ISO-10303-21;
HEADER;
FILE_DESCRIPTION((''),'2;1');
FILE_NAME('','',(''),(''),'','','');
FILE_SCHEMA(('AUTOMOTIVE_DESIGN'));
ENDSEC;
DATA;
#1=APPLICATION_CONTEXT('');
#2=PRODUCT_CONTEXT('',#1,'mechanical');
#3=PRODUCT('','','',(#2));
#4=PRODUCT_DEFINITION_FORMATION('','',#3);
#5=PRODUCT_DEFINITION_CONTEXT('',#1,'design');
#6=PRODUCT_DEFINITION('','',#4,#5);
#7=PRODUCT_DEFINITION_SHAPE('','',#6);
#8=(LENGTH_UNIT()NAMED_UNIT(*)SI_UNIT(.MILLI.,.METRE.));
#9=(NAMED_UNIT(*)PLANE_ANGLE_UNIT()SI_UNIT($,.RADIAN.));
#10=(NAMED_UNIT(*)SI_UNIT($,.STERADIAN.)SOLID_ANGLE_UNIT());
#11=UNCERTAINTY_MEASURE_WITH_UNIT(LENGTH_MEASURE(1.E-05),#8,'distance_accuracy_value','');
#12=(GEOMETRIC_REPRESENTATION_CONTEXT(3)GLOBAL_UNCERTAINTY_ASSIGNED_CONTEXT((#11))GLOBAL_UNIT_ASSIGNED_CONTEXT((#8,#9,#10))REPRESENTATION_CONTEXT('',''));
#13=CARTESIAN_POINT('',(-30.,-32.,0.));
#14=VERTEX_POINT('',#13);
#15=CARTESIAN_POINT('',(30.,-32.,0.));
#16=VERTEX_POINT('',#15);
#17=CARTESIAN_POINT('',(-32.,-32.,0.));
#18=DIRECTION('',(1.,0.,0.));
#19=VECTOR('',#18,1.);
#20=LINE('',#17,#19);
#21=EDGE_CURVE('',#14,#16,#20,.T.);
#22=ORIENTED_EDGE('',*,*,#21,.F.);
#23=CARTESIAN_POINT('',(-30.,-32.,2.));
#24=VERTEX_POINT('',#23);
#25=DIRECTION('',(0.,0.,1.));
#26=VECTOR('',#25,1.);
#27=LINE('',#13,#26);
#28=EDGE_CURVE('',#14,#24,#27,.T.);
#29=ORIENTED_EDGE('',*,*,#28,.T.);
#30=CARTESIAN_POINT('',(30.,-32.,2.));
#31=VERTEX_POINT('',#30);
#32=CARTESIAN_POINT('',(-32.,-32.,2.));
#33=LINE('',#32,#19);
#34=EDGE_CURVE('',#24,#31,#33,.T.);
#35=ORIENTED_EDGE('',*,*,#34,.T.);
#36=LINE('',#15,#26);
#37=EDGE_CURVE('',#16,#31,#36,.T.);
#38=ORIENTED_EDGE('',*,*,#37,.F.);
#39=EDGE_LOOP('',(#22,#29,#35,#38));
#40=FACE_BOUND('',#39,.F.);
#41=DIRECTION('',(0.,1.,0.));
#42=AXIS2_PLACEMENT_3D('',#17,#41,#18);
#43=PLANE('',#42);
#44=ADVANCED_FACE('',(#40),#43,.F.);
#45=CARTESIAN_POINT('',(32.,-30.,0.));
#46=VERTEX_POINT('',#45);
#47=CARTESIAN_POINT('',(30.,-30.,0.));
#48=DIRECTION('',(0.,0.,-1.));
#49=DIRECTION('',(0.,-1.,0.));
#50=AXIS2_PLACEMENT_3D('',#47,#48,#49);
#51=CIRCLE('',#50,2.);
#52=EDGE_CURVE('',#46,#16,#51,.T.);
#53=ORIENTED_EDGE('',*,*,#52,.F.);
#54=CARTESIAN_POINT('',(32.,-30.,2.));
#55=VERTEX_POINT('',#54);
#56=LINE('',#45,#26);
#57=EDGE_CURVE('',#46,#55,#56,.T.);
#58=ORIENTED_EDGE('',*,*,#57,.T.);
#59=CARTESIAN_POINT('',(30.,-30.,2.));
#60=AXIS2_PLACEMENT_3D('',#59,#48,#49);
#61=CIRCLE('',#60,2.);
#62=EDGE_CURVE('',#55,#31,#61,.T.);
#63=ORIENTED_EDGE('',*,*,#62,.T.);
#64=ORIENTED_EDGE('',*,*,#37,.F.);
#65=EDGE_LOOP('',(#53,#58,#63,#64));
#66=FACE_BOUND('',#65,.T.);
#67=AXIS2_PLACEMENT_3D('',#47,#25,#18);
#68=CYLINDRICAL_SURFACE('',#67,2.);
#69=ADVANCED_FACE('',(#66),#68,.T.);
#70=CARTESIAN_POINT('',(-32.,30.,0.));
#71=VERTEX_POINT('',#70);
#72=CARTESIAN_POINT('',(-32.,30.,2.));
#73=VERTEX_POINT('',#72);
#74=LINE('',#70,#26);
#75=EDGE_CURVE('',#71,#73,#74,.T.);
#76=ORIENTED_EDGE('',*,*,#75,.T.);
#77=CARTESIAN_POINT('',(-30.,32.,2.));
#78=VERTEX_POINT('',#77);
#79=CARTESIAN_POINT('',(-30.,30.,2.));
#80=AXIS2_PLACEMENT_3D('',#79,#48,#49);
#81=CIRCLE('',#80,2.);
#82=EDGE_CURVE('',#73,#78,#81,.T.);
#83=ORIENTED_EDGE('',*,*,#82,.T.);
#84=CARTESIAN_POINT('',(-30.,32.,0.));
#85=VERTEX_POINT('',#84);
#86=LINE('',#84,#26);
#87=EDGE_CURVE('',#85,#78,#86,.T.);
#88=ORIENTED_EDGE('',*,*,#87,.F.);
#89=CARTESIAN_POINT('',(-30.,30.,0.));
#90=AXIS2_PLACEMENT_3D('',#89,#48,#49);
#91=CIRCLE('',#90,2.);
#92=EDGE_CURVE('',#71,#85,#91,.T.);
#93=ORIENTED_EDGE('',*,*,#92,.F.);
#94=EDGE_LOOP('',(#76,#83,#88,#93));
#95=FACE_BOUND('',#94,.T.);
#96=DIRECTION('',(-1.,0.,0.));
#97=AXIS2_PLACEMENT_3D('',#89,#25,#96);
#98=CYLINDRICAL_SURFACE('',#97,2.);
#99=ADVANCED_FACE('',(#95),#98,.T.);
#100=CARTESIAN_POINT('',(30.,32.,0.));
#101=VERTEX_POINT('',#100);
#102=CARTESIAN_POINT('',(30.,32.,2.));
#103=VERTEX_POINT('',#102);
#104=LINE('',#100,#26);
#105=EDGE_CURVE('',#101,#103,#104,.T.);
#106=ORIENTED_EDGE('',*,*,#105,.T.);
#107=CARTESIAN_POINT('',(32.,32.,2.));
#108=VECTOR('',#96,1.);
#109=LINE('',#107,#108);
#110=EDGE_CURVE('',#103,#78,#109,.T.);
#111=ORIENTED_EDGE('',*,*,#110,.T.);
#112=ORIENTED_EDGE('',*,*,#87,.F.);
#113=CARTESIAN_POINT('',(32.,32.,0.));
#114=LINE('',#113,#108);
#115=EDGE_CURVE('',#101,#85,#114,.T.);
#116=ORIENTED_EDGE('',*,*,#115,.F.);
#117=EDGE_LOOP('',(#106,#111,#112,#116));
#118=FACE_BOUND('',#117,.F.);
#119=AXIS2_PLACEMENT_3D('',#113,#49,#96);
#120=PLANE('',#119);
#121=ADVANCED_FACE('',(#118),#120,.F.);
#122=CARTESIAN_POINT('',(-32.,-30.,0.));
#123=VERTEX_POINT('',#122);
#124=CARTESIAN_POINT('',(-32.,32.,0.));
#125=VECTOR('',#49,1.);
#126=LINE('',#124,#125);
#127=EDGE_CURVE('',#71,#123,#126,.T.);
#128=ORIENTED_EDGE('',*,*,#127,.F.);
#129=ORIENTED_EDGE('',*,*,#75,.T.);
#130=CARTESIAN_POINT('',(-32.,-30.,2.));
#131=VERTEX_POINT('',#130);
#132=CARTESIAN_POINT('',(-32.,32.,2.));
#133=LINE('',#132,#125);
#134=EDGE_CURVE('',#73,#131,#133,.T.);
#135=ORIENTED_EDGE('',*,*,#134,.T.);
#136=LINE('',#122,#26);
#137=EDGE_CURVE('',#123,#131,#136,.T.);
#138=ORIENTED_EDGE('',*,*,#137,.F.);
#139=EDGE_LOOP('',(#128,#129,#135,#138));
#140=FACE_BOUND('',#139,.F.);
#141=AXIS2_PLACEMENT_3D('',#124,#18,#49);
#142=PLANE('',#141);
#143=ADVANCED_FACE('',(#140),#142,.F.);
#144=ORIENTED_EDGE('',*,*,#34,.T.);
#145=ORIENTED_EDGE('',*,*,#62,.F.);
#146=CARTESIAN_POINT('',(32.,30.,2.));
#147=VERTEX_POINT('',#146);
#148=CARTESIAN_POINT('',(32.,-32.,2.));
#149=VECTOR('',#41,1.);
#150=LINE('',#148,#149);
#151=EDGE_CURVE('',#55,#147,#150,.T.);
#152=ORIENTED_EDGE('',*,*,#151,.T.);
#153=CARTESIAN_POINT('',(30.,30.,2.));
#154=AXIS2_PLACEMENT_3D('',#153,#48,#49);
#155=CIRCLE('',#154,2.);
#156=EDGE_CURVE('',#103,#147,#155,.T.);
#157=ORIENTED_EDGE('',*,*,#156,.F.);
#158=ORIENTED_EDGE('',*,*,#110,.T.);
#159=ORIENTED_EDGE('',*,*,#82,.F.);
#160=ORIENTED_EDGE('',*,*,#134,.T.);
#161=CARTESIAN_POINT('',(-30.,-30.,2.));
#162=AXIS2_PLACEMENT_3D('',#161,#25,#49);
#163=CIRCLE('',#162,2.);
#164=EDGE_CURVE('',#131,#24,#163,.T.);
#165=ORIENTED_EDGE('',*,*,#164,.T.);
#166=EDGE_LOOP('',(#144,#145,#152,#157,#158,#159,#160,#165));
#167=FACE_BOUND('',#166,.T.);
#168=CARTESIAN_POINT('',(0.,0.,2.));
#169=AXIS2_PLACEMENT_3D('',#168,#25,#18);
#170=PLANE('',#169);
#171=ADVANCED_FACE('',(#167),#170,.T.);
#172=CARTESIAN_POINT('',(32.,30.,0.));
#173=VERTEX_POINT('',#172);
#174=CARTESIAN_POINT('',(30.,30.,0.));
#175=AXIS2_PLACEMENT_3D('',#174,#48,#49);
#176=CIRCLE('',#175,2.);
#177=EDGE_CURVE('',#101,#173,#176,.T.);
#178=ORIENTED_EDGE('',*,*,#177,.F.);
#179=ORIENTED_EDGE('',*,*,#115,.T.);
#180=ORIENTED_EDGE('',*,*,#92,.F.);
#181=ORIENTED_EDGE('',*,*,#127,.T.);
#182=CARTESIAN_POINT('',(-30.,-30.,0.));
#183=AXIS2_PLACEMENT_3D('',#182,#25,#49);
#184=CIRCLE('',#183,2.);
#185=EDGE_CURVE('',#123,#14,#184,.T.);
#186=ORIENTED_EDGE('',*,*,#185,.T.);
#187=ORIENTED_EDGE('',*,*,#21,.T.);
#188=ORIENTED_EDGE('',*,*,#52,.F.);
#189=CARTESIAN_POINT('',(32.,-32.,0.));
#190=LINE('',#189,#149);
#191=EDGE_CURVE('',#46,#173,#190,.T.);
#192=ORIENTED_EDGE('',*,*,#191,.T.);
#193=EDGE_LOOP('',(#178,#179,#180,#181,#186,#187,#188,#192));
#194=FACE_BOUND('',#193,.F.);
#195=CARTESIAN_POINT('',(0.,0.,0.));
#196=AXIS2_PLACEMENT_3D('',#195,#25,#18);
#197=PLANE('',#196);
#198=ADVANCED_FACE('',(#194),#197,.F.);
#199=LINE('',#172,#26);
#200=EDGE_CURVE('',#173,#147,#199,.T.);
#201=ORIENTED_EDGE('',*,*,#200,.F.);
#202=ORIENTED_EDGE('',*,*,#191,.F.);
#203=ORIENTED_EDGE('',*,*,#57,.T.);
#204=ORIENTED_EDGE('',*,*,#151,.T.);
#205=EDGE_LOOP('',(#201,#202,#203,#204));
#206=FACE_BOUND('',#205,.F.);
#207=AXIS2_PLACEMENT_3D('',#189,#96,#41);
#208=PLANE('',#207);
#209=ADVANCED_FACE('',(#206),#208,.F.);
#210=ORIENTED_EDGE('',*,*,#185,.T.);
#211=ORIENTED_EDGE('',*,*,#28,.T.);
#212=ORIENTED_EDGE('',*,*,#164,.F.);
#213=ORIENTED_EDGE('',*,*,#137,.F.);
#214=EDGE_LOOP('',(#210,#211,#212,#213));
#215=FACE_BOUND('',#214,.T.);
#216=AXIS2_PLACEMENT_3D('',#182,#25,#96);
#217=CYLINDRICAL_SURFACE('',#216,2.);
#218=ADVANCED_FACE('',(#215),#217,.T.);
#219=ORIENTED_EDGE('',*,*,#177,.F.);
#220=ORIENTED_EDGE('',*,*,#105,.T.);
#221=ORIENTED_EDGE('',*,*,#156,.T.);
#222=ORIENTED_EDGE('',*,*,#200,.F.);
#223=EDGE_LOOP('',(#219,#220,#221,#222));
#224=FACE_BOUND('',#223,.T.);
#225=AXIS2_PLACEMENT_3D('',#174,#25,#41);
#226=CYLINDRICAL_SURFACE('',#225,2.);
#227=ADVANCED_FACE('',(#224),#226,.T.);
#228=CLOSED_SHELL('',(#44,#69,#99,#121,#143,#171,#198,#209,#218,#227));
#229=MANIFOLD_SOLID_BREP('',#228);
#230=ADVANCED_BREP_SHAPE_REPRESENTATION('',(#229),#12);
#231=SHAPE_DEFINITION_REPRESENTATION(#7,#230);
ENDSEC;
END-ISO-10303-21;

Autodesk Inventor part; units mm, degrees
ref_plane "YZ Plane" through (0, 0, 0) normal (1, 0, 0) x (0, 1, 0)
ref_plane "XZ Plane" through (0, 0, 0) normal (0, 1, 0) x (-1, 0, 0)
ref_plane "XY Plane" through (0, 0, 0) normal (0, 0, 1) x (1, 0, 0)
sketch "Sketch1" plane through (0, 0, 0) normal (0, 0, 1) x (1, 0, 0)
  line L0 (-32, -32) -> (32, -32)
  line L1 (32, -32) -> (32, 32)
  line L2 (32, 32) -> (-32, 32)
  line L3 (-32, 32) -> (-32, -32)
  line L4 (-32, -32) -> (32, 32) construction
  line L5 (32, -32) -> (-32, 32) construction
  point P0 (0, 0)
  dimension "d154" = 64
  dimension "d155" = 64
extrude "Plate5" add sketch "Sketch1" along normal blind 2
fillet "Corner Round1" radius 2 4 edges at (32, 32, 1) (-32, -32, 1) (-32, 32, 1) (32, -32, 1)
sketch "Sketch11" plane through (-50.5, -22, -28) normal (1, 0, 0) x (0, 0, -1)
  line L0 (-25.25, 44) -> (-25.25, 0) construction
  line L1 (0, 0) -> (-25.25, 0) construction
  line L2 (0, 0) -> (0, 44) construction
  line L3 (0, 44) -> (-25.25, 44) construction
  circle A0 centre (-10, 22) radius 5.5
  point P0 (-28, 22)
  point P1 (0, 22)
  dimension "d192" = 11
  dimension "d193" = 10
cut "Cut3" [suppressed]
feature "Corner Round3" [suppressed]
sketch "Sketch10" plane through (-34, 30, 2) normal (1, 0, 0) x (0, 1, 0)
  line L0 (-60, 0) -> (0, 0)
  line L1 (0, 0) -> (0, -30)
  line L2 (0, -30) -> (-60, -30)
  line L3 (-60, -30) -> (-60, 0)
properties part number "PRS 940-513 FDS diam way cup" material "Stainless Steel"
